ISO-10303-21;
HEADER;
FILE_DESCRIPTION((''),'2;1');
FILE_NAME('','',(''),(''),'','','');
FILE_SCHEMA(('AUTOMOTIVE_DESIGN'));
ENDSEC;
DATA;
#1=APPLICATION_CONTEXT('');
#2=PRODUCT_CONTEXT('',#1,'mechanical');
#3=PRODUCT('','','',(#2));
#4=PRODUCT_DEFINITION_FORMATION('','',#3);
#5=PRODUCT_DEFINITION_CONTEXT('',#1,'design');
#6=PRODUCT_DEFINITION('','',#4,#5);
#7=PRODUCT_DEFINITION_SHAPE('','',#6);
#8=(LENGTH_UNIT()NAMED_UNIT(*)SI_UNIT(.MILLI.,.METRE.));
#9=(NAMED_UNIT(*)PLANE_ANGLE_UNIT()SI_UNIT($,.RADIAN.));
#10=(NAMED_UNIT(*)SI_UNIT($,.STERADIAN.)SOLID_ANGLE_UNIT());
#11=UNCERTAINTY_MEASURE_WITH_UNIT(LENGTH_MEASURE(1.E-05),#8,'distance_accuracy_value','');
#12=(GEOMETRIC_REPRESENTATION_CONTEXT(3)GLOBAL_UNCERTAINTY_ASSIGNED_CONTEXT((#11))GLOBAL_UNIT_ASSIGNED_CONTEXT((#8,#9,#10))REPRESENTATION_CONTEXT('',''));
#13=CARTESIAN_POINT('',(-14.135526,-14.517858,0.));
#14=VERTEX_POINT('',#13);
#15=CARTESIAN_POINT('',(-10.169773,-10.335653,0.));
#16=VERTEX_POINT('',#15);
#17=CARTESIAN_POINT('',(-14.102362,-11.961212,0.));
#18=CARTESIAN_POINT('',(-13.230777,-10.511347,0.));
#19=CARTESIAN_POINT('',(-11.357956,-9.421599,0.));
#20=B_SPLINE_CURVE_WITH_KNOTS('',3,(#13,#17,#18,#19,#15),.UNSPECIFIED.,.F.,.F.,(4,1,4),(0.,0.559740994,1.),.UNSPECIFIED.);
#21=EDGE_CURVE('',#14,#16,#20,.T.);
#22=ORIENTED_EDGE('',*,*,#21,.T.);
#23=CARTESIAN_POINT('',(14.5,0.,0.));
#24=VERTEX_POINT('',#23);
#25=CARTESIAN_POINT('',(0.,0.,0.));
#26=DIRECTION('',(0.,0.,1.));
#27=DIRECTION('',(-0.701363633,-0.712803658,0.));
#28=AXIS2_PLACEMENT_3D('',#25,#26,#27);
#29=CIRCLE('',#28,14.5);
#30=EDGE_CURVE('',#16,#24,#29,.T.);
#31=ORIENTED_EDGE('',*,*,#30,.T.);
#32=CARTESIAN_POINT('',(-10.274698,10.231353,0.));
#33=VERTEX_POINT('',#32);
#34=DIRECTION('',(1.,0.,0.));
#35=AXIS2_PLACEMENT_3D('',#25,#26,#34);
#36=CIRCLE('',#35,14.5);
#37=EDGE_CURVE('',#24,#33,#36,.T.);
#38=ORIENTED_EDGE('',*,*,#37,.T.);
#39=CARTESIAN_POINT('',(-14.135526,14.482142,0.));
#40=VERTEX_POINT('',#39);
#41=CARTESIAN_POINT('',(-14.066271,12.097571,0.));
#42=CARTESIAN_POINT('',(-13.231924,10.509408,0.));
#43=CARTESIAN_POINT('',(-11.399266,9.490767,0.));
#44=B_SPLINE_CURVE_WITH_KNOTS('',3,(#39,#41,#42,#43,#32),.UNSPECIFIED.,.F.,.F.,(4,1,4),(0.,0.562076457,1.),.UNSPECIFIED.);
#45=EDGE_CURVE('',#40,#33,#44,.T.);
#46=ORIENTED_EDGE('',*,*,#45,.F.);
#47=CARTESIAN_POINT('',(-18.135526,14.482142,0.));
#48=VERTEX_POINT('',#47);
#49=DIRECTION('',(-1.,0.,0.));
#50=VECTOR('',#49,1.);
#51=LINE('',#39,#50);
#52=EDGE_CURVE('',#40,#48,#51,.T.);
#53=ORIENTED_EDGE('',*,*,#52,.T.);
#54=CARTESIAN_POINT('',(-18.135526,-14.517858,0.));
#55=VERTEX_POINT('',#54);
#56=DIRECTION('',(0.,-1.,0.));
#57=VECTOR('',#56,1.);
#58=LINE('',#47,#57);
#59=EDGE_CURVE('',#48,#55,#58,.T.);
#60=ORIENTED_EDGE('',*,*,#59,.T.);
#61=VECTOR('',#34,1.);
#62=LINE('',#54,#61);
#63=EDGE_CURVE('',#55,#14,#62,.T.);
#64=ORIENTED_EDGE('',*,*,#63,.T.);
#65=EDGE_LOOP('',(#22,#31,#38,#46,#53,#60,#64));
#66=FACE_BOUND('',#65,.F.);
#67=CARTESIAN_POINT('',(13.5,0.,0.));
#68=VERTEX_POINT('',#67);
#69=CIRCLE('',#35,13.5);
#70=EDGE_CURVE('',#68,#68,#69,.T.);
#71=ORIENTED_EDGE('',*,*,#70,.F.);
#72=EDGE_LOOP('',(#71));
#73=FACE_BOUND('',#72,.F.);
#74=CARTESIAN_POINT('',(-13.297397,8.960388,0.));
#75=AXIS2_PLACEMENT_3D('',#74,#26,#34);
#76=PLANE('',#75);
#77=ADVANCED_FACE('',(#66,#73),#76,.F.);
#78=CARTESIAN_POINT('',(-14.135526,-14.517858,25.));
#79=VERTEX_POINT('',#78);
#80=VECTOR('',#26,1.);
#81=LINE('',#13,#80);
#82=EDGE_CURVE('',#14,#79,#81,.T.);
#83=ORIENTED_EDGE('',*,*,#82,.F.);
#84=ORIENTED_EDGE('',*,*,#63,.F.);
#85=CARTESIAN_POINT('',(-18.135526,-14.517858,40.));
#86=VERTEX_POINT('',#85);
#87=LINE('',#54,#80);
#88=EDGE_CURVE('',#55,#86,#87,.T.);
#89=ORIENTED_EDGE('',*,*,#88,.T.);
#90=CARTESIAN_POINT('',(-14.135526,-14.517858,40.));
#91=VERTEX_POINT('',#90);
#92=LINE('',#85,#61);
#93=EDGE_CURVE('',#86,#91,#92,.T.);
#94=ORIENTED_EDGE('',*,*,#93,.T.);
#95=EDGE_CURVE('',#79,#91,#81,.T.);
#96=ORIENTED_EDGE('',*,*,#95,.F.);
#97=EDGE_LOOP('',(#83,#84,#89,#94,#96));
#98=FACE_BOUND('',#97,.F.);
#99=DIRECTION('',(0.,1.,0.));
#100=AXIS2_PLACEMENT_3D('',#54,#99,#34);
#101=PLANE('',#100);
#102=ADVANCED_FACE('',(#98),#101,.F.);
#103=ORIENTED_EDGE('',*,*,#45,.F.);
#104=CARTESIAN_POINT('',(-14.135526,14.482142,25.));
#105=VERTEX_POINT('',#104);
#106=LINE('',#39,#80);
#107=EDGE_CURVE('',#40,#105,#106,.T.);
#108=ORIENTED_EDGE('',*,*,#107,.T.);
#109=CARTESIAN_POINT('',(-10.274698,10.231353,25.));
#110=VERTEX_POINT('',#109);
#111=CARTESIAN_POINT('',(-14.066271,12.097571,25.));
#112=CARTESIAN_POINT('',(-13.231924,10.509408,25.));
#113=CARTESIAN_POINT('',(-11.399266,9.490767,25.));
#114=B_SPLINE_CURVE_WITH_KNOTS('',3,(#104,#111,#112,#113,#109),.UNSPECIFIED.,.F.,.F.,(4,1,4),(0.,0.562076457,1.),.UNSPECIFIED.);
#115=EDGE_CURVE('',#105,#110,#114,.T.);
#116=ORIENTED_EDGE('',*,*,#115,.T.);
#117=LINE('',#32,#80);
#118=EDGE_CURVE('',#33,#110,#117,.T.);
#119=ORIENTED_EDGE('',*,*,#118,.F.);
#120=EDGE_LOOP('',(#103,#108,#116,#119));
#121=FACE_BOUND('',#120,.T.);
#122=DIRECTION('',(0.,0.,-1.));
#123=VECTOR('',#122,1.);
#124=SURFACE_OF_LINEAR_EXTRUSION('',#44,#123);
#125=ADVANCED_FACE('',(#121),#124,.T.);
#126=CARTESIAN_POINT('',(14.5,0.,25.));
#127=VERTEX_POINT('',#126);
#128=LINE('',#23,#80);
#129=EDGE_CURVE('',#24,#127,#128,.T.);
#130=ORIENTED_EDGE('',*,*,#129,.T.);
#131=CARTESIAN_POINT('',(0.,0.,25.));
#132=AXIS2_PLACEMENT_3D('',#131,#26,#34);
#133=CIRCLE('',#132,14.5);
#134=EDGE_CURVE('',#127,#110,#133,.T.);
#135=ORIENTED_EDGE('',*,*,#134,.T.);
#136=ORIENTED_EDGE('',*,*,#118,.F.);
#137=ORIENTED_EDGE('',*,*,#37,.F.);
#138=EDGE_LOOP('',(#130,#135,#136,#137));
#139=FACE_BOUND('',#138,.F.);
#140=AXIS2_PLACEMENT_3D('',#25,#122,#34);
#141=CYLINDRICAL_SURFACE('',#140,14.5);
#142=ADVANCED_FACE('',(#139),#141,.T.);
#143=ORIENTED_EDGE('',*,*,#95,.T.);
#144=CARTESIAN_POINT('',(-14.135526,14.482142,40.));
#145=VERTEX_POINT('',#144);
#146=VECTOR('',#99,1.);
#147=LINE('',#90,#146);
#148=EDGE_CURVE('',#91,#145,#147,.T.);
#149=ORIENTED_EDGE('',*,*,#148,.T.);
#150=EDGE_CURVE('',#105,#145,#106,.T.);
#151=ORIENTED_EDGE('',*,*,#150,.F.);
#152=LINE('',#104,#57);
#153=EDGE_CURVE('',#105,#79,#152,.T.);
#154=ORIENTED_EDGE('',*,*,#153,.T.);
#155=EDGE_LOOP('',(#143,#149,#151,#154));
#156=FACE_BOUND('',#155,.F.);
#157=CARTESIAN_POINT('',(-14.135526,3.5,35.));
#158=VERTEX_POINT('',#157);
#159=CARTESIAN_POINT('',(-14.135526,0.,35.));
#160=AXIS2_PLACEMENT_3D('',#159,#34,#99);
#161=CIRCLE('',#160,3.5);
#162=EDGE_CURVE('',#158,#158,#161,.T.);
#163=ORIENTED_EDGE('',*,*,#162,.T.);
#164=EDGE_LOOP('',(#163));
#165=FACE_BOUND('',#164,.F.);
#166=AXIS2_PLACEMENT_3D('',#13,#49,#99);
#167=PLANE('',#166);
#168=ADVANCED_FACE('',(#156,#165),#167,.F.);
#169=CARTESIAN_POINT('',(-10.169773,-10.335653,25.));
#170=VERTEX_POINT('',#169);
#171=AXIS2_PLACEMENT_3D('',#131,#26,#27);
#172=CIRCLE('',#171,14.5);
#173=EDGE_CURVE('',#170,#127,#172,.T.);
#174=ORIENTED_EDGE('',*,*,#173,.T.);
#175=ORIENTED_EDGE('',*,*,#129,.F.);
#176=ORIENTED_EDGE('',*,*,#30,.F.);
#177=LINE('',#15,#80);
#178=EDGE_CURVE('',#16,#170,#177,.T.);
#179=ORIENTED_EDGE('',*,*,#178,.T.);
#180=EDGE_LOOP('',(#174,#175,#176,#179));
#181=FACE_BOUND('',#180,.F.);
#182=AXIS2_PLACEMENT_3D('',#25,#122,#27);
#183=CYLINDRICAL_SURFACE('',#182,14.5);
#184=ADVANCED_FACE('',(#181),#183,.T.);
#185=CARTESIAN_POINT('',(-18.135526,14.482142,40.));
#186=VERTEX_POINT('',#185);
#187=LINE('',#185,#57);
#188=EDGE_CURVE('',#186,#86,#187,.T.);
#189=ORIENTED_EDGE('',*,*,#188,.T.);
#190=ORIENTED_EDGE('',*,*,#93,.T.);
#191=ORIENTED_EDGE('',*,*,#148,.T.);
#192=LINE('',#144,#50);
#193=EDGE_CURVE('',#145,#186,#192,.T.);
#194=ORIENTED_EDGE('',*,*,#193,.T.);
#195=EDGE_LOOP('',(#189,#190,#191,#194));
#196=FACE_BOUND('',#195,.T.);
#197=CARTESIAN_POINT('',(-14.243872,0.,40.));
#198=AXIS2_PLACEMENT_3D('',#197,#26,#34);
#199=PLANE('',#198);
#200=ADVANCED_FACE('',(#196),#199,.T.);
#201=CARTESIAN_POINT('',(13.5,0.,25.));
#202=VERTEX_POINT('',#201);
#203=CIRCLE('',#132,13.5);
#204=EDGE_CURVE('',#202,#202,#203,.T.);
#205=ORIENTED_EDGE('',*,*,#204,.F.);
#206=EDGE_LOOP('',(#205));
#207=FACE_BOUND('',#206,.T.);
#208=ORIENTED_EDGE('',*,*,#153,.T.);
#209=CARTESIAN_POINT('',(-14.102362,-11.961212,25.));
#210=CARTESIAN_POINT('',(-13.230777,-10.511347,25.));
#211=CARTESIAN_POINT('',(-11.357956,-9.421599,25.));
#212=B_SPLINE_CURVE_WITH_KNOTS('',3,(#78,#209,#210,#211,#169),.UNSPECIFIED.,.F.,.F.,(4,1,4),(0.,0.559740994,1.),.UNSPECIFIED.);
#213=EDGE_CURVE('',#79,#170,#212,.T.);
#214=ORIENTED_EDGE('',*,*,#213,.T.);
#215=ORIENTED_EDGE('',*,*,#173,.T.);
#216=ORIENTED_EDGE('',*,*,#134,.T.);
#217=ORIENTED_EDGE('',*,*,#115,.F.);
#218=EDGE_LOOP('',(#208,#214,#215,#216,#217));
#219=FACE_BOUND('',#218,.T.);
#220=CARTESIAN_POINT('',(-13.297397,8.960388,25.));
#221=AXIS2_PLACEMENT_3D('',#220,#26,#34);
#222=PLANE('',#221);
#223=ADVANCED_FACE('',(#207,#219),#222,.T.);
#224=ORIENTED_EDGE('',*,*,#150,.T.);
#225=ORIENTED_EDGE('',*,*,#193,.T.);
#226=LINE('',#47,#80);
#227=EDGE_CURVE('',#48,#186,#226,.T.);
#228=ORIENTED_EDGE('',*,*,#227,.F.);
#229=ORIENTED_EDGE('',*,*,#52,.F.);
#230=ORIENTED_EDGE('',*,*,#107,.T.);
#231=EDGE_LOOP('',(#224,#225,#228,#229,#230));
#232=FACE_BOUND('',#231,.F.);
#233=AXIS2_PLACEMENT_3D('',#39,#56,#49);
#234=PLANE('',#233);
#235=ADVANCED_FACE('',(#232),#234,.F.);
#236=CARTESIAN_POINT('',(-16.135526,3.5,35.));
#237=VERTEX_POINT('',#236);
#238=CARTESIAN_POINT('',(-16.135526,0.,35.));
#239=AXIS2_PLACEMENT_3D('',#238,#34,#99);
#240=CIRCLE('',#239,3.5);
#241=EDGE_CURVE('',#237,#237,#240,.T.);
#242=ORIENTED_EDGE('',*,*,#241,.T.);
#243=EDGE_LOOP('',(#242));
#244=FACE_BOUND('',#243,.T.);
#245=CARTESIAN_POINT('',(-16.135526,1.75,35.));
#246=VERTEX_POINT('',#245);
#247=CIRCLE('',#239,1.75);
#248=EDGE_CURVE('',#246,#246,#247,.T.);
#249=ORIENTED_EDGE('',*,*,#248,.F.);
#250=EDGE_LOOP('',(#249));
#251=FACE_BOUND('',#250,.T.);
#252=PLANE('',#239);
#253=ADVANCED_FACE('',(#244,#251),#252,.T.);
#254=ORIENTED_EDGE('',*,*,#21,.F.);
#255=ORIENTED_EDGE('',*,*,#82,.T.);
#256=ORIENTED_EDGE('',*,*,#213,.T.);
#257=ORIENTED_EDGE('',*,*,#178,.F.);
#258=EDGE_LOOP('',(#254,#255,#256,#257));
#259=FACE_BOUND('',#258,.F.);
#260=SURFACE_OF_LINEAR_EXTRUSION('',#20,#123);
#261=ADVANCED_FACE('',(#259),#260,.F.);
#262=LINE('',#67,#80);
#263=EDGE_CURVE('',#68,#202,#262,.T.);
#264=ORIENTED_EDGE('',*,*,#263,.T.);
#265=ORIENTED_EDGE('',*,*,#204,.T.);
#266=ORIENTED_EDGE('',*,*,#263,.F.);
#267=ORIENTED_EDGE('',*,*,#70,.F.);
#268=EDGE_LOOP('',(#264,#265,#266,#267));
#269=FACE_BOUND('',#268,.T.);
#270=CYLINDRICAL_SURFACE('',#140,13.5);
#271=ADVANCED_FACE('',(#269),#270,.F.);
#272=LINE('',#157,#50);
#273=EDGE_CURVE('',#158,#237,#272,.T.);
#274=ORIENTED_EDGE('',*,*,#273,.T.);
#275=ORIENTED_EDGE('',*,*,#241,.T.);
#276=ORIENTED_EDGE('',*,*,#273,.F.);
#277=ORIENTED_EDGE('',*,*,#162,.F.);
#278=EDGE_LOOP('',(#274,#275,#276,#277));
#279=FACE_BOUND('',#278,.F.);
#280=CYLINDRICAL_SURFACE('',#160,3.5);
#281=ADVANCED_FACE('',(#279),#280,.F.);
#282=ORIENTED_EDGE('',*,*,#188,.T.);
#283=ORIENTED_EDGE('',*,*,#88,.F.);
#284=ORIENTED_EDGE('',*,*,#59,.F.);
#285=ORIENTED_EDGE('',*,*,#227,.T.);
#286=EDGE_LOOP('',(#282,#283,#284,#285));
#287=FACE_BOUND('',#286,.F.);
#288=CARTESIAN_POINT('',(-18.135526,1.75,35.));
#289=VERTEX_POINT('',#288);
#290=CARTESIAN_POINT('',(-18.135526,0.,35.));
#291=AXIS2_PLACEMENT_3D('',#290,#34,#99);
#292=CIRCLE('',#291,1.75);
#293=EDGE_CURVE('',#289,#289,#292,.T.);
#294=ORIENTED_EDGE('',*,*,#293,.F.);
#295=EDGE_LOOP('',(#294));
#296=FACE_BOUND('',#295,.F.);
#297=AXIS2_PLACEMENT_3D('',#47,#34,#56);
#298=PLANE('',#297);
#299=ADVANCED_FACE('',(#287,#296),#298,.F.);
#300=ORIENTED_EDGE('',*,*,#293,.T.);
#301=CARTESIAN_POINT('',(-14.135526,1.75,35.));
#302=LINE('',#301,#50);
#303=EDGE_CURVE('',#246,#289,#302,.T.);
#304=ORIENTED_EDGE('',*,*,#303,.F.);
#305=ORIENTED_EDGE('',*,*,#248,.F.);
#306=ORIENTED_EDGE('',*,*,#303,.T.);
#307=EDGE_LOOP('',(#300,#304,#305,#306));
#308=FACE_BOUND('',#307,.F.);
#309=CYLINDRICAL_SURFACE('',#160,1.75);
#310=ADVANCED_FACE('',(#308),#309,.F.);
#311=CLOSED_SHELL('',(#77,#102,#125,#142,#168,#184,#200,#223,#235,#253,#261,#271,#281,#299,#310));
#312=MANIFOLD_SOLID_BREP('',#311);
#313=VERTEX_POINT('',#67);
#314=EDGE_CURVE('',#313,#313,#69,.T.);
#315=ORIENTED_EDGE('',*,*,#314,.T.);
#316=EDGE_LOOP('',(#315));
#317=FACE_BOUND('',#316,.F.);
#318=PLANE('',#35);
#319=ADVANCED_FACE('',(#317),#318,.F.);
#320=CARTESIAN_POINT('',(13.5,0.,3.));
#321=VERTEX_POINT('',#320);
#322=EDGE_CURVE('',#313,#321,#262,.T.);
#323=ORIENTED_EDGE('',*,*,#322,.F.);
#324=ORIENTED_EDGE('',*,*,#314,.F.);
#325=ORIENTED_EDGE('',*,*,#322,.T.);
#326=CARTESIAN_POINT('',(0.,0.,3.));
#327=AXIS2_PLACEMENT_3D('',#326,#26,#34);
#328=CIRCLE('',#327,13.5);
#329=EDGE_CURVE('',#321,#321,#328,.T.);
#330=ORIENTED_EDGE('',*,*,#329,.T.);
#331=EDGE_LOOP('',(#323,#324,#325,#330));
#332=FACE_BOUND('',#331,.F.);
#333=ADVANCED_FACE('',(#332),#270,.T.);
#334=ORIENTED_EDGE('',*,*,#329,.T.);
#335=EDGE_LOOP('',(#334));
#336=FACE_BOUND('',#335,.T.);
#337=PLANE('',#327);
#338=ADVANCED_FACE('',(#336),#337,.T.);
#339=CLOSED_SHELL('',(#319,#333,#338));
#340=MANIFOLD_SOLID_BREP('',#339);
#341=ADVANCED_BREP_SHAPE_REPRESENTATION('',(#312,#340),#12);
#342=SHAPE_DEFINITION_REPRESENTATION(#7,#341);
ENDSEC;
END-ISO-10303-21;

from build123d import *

# Parameters (mm, degrees)
F1_DEPTH = 40
F0_R     = 13.5
F2_DEPTH = 3
F3_DEPTH = 25
F4_R     = 1.75
F5_DEPTH = 25
F4_R_2   = 3.5
F6_DEPTH = 2


with BuildPart() as f1:
    # F0 (on Top) → F1 (new body)
    with BuildSketch(Plane.XY):
        with BuildLine():
            Line((-14.1355262175, -3.2306189119), (-14.1355262175, 3.2306189119))
            ThreePointArc((-14.1355262175, 3.2306189119), (-14.5, 0), (-14.1355262175, -3.2306189119))
        make_face()
        with BuildLine():
            ThreePointArc((-14.1355262175, -3.2306189119), (-14.5, 0), (-14.1355262175, 3.2306189119))
            Line((-14.1355262175, 3.2306189119), (-14.1355262175, 14.4821423069))
            Line((-14.1355262175, 14.4821423069), (-18.1355262175, 14.4821423069))
            Line((-18.1355262175, 14.4821423069), (-18.1355262175, -14.5178576931))
            Line((-18.1355262175, -14.5178576931), (-14.1355262175, -14.5178576931))
            Line((-14.1355262175, -14.5178576931), (-14.1355262175, -3.2306189119))
        make_face()
    extrude(amount=F1_DEPTH)

    # F0 (on Top) → F3 (join)
    with BuildSketch(Plane.XY):
        with BuildLine():
            ThreePointArc((-14.1355262175, 3.2306189119), (-12.6971385159, 7.0023334331), (-10.2746975407, 10.2313533048))
            add(Edge.make_bspline(
                [(-14.1355262175, 14.4821423069), (-14.0662710763, 12.0975714625), (-13.2319243302, 10.509407647), (-11.3992663412, 9.490766824), (-10.2746975407, 10.2313533048)],
                knots=[0, 0, 0, 0, 0.5620764572, 1, 1, 1, 1], degree=3))
            Line((-14.1355262175, 14.4821423069), (-14.1355262175, 3.2306189119))
        make_face()
        with BuildLine():
            ThreePointArc((-10.1697726735, -10.3356530403), (5.6030481095, -13.3737000072), (14.5, 0))
            ThreePointArc((14.5, 0), (5.5347486691, 13.402110176), (-10.2746975407, 10.2313533048))
            ThreePointArc((-10.2746975407, 10.2313533048), (-12.6971385159, 7.0023334331), (-14.1355262175, 3.2306189119))
            Line((-14.1355262175, 3.2306189119), (-14.1355262175, -3.2306189119))
            ThreePointArc((-14.1355262175, -3.2306189119), (-12.6612505716, -7.0670173314), (-10.1697726735, -10.3356530403))
        make_face()
        Circle(F0_R, mode=Mode.SUBTRACT)
        with BuildLine():
            add(Edge.make_bspline(
                [(-14.1355262175, -14.5178576931), (-14.1023624483, -11.961212262), (-13.2307772223, -10.5113467824), (-11.3579562474, -9.4215989986), (-10.1697726735, -10.3356530403)],
                knots=[0, 0, 0, 0, 0.5597409936, 1, 1, 1, 1], degree=3))
            ThreePointArc((-10.1697726735, -10.3356530403), (-12.6612505716, -7.0670173314), (-14.1355262175, -3.2306189119))
            Line((-14.1355262175, -3.2306189119), (-14.1355262175, -14.5178576931))
        make_face()
    extrude(amount=F3_DEPTH)

    # F4 (on face) → F5 (cut)
    with BuildSketch(Plane.YZ.offset(-14.1355262175)):
        with Locations((0, 35)):
            Circle(F4_R)
    extrude(amount=-F5_DEPTH, mode=Mode.SUBTRACT)

    # F4 (on face) → F6 (cut)
    with BuildSketch(Plane.YZ.offset(-14.1355262175)):
        with Locations((0, 35)):
            Circle(F4_R_2)
        with Locations((0, 35)):
            Circle(F4_R, mode=Mode.SUBTRACT)
    extrude(amount=-F6_DEPTH, mode=Mode.SUBTRACT)


with BuildPart() as f2:
    # F0 (on Top) → F2 (new body)
    with BuildSketch(Plane.XY):
        Circle(F0_R)
    extrude(amount=F2_DEPTH)


solid = Compound([f1.part, f2.part])
